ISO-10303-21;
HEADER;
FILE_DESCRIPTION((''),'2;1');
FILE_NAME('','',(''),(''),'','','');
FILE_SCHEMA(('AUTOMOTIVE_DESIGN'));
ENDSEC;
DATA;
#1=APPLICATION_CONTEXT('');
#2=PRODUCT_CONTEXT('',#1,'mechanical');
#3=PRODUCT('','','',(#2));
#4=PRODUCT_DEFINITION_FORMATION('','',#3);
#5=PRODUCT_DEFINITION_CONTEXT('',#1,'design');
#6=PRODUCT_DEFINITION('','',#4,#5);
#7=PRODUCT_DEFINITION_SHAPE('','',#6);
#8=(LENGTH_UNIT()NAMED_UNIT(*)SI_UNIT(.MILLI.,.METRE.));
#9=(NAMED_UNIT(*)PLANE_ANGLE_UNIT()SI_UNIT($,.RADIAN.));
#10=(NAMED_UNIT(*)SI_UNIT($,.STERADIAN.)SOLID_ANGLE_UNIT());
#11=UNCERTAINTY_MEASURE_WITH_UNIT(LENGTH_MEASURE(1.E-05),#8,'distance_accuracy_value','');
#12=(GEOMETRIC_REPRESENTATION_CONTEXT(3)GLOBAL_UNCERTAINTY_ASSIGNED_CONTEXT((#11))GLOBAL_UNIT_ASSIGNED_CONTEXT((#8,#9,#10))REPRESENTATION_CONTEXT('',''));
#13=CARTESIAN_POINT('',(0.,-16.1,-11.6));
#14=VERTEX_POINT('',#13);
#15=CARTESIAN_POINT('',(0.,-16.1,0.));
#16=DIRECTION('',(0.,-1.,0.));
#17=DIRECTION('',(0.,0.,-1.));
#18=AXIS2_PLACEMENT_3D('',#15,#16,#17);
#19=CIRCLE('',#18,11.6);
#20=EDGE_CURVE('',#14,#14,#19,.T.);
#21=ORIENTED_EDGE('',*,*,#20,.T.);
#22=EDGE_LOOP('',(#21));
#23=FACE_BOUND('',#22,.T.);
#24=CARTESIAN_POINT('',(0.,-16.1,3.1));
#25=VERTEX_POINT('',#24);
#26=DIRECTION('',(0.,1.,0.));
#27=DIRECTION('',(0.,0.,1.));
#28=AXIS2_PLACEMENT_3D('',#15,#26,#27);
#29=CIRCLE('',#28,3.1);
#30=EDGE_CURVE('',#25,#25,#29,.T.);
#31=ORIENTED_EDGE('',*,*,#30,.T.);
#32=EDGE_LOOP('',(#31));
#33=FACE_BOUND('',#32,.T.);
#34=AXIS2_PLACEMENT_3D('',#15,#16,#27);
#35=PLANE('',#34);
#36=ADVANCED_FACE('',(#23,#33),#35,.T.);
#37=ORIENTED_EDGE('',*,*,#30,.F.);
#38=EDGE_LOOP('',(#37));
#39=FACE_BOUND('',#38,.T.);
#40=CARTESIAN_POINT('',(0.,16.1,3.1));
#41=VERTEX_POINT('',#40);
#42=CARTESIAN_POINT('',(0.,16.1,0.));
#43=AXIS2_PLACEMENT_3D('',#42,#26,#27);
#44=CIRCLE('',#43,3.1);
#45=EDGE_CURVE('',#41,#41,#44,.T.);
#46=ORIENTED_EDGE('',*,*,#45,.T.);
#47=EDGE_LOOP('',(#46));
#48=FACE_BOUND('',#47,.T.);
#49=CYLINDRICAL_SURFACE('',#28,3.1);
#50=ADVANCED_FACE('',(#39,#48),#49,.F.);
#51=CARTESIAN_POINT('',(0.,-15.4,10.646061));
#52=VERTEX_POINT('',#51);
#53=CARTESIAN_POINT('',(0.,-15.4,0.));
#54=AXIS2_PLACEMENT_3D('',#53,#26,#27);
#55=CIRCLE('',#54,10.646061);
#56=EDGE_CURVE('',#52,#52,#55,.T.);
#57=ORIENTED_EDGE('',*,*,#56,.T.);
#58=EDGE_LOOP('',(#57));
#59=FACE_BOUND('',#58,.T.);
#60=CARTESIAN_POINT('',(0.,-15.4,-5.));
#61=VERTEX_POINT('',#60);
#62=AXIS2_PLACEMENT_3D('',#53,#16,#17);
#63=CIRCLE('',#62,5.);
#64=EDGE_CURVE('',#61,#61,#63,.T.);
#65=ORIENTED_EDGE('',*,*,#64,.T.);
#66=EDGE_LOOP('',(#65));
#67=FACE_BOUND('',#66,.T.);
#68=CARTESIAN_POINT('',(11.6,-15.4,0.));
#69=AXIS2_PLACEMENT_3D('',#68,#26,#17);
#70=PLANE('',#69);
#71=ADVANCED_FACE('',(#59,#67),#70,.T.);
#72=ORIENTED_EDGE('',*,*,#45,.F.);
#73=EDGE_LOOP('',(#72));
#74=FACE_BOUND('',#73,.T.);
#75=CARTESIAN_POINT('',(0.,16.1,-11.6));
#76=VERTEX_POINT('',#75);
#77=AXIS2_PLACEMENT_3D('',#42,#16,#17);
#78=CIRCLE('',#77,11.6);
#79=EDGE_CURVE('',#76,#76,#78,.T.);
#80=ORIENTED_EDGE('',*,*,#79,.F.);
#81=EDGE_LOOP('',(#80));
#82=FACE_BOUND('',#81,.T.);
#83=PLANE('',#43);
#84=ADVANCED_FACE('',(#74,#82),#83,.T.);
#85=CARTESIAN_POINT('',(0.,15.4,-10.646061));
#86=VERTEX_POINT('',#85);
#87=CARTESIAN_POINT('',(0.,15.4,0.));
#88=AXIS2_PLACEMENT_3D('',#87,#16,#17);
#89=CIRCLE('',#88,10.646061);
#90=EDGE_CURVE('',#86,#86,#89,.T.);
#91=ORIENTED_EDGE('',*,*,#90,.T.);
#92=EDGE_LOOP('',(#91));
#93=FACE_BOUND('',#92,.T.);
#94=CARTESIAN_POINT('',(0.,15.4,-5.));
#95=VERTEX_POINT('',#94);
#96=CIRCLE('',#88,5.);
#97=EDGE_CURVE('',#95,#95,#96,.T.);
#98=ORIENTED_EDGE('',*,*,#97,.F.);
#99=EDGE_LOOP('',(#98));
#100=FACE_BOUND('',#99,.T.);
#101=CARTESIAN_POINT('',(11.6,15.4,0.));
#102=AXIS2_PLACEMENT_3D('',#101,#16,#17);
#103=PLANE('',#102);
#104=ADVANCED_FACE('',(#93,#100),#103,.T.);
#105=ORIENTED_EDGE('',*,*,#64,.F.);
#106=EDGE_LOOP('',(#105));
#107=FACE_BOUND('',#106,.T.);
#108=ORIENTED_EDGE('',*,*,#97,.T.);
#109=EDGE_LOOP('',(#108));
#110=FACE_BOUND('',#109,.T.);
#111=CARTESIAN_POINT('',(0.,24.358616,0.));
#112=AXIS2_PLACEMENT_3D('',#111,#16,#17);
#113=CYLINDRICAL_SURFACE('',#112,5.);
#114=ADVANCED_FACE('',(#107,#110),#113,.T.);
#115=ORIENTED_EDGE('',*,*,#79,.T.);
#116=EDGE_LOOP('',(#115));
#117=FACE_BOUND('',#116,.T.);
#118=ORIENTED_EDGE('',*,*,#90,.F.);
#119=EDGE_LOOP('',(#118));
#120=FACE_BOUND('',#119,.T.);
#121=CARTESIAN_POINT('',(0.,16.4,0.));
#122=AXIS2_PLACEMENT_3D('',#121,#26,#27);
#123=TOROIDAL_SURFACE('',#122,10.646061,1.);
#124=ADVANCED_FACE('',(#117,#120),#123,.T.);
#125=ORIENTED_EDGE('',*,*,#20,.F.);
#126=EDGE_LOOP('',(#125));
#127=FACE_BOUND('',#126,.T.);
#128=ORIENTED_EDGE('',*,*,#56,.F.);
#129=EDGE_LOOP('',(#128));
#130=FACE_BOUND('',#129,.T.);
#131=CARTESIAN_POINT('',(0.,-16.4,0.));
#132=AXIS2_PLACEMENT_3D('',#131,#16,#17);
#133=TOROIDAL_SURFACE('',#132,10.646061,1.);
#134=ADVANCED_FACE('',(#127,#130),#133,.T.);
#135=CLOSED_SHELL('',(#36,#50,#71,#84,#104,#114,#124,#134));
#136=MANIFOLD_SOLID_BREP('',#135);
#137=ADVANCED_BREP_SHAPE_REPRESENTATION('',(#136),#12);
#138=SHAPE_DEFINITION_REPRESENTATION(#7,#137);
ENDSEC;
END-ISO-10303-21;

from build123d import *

# Parameters (mm, degrees)
SKETCH2_R          = 3.1
CUT_EXTRUDE1_DEPTH = 37.13806857
FILLET1_R          = 1


with BuildPart() as part:
    # Sketch1 → Revolve1 (revolve)
    with BuildSketch(Plane.XY, mode=Mode.PRIVATE) as revolve1_sk:
        Polygon((0, 0), (0, 16.1), (11.6, 16.1), (11.6, 15.4), (5, 15.4), (5, 0), align=None)
    revolve(revolve1_sk.sketch.rotate(Axis((0, 24.358616114, 0), (0, 1, 0)), 90), axis=Axis((0, 24.358616114, 0), (0, 1, 0)))

    # Mirror1: part across plane


with BuildPart() as part_1:
    add(part.part)
    add(part.part.mirror(Plane(origin=(5, 0, 0), x_dir=(0, 0, 1), z_dir=(0, -1, 0))))

    # Sketch2 → Cut-Extrude1 (cut, through all)
    with BuildSketch(Plane(origin=(0, 16.1, 0), x_dir=(1, 0, 0), z_dir=(0, 1, 0))):
        with Locations(Location((0, 0, 0), (0, 0, 270))):
            Circle(SKETCH2_R)
    extrude(amount=-CUT_EXTRUDE1_DEPTH, mode=Mode.SUBTRACT)

    # Fillet1
    # the kernel refuses this fillet: 1 mm, written as the material it takes off along each edge
    with BuildSketch(Plane(origin=(0, -15.4, 0), x_dir=(0, 0, -1), z_dir=(1, 0, 0))) as fillet1_piece_1:
        with BuildLine():
            CenterArc((10.646060799, -1), FILLET1_R, 17.457603124, 72.542396876)
            Line((10.646060799, 0), (10.646060799, 0.02))
            Line((10.646060799, 0.02), (11.6, 0.02))
            Line((11.6, 0.02), (11.62, 0))
            ThreePointArc((11.62, 0), (11.62, -0.35), (11.619078784, -0.694))
            Line((11.619078784, -0.694), (11.6, -0.7))
        make_face()
    revolve(axis=Axis((0, -15.4, 0), (0, 1, 0)), mode=Mode.SUBTRACT)
    with BuildSketch(Plane(origin=(0, 15.4, 0), x_dir=(0, 0, -1), z_dir=(1, 0, 0))) as fillet1_piece_2:
        with BuildLine():
            CenterArc((10.646060799, 1), FILLET1_R, 270, 72.542396876)
            Line((10.646060799, 0), (10.646060799, -0.02))
            Line((10.646060799, -0.02), (11.6, -0.02))
            Line((11.6, -0.02), (11.62, 0))
            ThreePointArc((11.62, 0), (11.62, 0.35), (11.619078784, 0.694))
            Line((11.619078784, 0.694), (11.6, 0.7))
        make_face()
    revolve(axis=Axis((0, 15.4, 0), (0, 1, 0)), mode=Mode.SUBTRACT)


solid = part_1.part
